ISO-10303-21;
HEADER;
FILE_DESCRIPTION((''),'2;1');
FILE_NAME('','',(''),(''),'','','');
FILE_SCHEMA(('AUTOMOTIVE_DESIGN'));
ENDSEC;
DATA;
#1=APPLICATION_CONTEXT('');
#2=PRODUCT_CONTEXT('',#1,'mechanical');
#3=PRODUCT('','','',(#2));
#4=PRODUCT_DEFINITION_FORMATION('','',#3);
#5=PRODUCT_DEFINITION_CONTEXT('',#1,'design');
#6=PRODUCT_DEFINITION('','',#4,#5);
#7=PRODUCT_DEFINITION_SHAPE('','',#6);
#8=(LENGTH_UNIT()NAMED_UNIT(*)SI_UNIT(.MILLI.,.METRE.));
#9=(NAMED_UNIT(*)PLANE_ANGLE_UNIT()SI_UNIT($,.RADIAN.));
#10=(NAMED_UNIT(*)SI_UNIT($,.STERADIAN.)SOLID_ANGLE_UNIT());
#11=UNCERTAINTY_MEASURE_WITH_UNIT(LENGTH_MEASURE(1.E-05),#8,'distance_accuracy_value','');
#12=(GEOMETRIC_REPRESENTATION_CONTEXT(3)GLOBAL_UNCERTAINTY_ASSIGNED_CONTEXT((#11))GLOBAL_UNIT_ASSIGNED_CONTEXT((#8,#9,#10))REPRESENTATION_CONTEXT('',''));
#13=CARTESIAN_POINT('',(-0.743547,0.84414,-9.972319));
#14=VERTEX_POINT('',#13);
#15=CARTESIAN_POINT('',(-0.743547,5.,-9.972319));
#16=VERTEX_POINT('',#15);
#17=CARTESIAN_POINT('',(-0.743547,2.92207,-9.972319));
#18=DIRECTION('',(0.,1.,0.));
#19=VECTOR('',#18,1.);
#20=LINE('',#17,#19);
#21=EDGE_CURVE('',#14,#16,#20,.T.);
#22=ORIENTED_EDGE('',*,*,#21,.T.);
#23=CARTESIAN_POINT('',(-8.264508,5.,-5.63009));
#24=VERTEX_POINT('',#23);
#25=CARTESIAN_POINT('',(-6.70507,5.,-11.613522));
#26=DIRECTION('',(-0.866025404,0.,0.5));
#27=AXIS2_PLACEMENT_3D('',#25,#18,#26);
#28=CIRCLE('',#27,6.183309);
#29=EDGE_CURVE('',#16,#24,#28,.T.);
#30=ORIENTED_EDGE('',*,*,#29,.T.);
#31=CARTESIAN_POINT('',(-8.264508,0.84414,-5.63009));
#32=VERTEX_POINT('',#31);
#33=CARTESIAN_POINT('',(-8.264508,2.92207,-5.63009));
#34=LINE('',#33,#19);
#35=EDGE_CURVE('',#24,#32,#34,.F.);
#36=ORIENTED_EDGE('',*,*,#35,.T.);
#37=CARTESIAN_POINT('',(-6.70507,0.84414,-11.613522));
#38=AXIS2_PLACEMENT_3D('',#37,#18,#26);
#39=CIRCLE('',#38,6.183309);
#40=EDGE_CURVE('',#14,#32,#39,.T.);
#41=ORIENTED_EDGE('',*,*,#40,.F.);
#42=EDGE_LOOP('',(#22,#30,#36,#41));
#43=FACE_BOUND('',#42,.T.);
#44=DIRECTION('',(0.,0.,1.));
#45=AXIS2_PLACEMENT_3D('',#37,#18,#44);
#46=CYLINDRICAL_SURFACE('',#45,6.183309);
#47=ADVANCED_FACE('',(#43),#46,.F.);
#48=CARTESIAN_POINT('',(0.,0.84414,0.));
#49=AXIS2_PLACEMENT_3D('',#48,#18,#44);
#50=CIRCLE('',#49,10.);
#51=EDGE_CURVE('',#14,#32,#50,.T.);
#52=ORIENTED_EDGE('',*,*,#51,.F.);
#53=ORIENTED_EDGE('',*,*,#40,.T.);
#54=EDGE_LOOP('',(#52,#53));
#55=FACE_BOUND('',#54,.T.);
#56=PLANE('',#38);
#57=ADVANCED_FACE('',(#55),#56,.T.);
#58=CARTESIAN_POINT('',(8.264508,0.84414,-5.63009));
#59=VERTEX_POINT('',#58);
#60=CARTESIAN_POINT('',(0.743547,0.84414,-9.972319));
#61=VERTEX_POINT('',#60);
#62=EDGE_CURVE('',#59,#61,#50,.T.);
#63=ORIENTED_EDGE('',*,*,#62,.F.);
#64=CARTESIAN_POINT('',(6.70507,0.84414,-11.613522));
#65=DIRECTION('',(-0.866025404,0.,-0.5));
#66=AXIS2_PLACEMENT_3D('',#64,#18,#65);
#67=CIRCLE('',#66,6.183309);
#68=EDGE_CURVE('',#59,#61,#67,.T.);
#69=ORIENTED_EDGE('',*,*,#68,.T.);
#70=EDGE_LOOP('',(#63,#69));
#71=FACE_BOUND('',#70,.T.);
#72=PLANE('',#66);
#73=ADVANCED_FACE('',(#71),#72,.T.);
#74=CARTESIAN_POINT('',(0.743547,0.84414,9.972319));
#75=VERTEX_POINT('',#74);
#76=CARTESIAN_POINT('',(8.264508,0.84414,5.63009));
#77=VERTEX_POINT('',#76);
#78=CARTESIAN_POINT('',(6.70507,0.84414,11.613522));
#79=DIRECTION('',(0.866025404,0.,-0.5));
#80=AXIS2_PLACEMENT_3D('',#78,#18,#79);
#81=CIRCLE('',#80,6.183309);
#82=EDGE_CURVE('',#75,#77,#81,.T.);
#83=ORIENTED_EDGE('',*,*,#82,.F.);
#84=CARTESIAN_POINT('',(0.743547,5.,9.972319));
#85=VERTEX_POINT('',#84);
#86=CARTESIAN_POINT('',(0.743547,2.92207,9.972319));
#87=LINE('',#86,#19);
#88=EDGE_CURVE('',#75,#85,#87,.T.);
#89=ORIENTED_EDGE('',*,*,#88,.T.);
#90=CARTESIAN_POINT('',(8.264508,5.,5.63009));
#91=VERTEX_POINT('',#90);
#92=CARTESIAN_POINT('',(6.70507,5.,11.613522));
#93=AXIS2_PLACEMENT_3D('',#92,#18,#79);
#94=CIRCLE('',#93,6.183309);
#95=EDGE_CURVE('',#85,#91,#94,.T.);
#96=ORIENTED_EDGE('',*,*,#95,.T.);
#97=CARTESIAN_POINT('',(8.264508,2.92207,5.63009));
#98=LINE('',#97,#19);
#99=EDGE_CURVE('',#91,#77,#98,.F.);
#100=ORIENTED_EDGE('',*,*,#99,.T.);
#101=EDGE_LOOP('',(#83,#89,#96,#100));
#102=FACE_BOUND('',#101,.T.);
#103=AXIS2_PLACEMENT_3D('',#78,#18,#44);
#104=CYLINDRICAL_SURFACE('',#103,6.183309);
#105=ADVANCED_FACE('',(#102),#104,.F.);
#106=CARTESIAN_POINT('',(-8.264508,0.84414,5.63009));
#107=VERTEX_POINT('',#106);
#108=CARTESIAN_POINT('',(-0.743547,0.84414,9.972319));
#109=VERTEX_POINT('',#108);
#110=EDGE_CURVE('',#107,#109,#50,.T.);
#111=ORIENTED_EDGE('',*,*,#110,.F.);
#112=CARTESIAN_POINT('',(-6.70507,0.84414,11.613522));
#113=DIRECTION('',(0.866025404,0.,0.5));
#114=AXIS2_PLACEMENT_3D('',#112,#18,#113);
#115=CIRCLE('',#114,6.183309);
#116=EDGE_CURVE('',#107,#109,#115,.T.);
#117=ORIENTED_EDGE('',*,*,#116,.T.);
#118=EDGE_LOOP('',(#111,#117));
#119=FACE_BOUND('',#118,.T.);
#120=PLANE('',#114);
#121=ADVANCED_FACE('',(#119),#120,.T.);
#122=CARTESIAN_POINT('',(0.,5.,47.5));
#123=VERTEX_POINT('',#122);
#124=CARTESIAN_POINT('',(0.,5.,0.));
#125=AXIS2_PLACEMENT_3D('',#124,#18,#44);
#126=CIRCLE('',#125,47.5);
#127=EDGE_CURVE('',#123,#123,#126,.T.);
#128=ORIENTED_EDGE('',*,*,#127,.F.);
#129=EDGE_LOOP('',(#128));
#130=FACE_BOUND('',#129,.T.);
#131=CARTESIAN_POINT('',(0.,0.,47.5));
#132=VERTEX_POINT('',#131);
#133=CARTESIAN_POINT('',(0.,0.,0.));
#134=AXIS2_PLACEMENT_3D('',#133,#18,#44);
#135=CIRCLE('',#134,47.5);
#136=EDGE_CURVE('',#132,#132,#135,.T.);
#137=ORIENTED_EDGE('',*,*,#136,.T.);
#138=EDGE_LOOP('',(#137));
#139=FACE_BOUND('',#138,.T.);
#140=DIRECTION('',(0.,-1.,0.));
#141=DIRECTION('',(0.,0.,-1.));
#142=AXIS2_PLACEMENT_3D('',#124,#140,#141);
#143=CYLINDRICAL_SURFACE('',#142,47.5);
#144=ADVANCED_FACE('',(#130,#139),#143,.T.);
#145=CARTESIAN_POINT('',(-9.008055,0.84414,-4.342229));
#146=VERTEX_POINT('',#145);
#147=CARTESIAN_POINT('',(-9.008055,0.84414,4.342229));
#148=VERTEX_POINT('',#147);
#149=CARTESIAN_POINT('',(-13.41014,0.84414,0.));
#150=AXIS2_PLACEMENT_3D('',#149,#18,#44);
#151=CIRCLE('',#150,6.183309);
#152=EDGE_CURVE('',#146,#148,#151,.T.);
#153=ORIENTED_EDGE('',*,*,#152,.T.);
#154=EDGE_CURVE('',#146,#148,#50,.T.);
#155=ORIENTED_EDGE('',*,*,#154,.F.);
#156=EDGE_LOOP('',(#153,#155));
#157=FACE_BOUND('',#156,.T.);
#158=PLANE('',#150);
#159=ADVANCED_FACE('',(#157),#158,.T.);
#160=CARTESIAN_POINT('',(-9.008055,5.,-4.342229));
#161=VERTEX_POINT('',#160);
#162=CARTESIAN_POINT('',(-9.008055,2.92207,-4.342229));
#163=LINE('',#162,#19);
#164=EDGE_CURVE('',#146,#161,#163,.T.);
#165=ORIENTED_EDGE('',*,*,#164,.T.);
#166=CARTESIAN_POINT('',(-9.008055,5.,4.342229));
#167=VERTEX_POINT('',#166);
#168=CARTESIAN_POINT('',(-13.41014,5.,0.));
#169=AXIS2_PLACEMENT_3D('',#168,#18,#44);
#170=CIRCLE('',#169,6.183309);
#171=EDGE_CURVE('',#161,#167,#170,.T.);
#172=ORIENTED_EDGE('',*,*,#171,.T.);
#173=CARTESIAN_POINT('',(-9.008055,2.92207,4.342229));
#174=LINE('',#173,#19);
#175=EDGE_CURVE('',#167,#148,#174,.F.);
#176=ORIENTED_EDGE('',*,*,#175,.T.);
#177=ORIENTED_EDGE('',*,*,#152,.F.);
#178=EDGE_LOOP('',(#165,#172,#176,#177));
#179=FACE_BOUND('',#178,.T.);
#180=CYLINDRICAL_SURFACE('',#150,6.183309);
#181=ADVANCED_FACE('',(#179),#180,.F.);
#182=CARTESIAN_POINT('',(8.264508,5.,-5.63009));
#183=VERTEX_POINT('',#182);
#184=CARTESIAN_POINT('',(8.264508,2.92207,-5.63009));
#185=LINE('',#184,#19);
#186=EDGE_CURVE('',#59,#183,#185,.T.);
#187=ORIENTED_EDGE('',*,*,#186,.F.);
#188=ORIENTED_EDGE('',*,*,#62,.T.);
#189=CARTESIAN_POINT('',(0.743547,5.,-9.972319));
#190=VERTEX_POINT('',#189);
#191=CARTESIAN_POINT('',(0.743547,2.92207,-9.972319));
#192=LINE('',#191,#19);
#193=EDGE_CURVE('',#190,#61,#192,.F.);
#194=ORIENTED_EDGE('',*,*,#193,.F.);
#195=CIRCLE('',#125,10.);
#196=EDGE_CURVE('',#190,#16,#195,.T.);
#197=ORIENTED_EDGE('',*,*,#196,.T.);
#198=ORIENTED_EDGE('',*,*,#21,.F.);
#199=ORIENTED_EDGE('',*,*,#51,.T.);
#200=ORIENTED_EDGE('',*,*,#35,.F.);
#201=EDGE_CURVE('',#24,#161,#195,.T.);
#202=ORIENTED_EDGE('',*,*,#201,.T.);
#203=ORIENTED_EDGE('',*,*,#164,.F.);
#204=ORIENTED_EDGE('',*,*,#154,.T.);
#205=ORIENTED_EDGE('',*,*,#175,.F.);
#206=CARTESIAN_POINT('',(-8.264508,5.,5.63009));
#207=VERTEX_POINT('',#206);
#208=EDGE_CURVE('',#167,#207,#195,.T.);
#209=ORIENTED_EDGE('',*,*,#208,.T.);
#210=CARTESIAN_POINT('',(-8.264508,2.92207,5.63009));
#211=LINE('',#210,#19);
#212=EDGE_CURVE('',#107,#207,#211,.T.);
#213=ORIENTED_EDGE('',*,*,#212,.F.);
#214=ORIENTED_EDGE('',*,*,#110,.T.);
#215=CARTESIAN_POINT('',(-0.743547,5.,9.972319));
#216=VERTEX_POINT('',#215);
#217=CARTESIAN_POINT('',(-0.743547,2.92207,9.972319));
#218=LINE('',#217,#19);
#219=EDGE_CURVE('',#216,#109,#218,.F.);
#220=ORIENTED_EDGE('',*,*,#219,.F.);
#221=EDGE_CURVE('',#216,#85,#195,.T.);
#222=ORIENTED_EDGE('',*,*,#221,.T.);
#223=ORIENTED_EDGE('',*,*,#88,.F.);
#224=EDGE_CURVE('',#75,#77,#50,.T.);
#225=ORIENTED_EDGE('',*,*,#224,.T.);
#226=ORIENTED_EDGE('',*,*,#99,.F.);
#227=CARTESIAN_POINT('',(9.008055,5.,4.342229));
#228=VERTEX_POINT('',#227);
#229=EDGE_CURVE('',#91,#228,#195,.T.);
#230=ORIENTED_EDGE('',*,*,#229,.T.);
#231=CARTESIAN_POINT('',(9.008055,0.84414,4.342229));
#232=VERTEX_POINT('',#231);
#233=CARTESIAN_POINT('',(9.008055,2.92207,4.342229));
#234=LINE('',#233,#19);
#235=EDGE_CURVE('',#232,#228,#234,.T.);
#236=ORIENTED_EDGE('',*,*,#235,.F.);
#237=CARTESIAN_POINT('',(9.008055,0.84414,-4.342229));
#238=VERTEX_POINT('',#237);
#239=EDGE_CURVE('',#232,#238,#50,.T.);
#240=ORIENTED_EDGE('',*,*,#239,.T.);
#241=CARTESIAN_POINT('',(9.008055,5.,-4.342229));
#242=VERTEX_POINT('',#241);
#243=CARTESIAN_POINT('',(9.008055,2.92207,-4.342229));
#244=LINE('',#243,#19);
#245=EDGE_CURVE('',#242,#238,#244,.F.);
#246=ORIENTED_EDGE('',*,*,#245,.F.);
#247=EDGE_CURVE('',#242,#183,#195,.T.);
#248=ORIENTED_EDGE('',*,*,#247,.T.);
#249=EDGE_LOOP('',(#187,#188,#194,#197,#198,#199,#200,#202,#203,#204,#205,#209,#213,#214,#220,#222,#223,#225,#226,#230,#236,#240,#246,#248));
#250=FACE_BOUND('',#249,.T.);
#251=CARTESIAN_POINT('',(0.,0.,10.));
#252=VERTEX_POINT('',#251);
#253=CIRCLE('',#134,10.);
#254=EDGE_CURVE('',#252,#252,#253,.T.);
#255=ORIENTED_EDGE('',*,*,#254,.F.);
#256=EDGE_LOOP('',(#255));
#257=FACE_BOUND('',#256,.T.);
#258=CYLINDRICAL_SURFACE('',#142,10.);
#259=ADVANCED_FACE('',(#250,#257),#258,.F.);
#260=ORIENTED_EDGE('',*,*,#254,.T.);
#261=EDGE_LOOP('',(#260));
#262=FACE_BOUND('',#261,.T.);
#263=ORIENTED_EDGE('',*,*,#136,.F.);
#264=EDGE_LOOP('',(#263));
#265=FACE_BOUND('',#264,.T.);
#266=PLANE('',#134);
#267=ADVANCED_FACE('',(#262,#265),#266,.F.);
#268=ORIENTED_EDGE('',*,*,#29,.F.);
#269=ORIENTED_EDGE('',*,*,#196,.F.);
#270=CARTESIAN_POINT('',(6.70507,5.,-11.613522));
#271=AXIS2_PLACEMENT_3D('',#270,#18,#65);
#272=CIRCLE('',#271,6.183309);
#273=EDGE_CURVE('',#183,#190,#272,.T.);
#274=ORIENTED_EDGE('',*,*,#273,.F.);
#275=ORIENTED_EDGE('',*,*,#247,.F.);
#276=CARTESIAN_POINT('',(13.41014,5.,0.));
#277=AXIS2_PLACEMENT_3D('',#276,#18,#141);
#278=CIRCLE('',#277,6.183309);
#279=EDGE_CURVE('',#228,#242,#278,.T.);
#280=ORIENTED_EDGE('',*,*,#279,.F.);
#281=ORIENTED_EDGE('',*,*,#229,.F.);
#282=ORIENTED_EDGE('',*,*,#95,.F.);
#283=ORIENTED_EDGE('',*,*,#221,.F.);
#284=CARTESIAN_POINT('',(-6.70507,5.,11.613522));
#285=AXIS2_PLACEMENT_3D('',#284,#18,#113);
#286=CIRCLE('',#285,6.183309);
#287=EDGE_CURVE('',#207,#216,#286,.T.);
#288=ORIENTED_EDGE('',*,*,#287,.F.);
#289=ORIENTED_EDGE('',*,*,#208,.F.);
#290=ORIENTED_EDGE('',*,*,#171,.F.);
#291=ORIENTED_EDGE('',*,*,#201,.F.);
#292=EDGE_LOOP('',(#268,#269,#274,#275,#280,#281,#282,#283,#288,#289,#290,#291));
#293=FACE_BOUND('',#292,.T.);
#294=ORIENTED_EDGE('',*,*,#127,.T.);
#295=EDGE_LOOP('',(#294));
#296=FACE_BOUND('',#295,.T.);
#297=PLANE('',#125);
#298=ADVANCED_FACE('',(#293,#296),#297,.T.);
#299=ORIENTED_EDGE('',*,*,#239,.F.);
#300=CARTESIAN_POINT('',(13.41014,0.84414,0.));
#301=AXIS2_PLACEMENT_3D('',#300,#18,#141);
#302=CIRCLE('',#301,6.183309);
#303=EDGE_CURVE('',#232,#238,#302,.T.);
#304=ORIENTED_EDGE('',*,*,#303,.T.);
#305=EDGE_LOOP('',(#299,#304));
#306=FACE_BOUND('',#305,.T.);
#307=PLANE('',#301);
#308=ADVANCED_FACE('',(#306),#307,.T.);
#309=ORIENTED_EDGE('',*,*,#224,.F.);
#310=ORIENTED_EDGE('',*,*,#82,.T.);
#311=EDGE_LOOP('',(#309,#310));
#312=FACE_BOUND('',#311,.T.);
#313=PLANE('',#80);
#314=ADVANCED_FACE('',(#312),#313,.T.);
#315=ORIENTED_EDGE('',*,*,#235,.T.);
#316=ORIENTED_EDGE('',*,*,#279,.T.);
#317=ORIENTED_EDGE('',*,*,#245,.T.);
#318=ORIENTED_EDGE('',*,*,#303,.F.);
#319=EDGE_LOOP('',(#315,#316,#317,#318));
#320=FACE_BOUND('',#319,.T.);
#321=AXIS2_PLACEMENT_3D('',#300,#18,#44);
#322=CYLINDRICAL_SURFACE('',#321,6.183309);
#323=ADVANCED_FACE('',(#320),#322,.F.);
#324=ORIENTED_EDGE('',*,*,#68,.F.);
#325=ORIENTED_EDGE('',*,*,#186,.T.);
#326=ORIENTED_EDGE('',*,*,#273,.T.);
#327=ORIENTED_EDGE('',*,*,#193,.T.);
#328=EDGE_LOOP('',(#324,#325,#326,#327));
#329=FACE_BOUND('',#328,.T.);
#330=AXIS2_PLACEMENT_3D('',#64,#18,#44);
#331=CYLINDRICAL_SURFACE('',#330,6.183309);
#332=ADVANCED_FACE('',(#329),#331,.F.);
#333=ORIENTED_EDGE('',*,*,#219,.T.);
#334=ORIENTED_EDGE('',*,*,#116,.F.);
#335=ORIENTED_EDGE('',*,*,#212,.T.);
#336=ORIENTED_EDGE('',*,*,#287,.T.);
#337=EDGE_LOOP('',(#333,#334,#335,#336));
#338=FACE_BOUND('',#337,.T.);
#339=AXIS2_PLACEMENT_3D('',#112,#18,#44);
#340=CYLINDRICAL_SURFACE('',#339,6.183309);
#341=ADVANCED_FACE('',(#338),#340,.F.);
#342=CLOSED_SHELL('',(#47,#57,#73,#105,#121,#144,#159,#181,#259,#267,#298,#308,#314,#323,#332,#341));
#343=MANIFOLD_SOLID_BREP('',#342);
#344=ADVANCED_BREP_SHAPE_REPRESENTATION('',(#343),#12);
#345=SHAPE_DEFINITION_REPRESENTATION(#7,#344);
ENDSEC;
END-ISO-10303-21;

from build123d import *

# Parameters (mm, degrees)
SKETCH1_R           = 47.5
BOSS_EXTRUDE1_DEPTH = 5
SKETCH2_R           = 10
CUT_EXTRUDE1_DEPTH  = 68.360967927
SKETCH3_R           = 6.183308578
CUT_EXTRUDE2_DEPTH  = 4.15585977
CIRPATTERN1_COUNT   = 6


with BuildPart() as part:
    # Sketch1 → Boss-Extrude1 (new body)
    with BuildSketch(Plane(origin=(0, 0, 0), x_dir=(1, 0, 0), z_dir=(0, 1, 0))):
        Circle(SKETCH1_R)
    extrude(amount=BOSS_EXTRUDE1_DEPTH)

    # Sketch2 → Cut-Extrude1 (cut, through all)
    with BuildSketch(Plane(origin=(0, 0, 0), x_dir=(1, 0, 0), z_dir=(0, 1, 0))):
        Circle(SKETCH2_R)
    extrude(amount=CUT_EXTRUDE1_DEPTH, mode=Mode.SUBTRACT)

    # Sketch3 → Cut-Extrude2 (cut)
    with BuildSketch(Plane(origin=(0, 5, 0), x_dir=(1, 0, 0), z_dir=(0, 1, 0))):
        with Locations((-13.410140289, 0)):
            Circle(SKETCH3_R)
    cut_extrude2 = extrude(amount=-CUT_EXTRUDE2_DEPTH, mode=Mode.SUBTRACT)

    # CirPattern1: Cut-Extrude2 ×6 about axis
    cirpattern1_axis = Axis((0, 0, 0), (0, 1, 0))
    for i in range(1, CIRPATTERN1_COUNT):
        add(cut_extrude2.rotate(cirpattern1_axis, i * 360 / CIRPATTERN1_COUNT), mode=Mode.SUBTRACT)


solid = part.part
